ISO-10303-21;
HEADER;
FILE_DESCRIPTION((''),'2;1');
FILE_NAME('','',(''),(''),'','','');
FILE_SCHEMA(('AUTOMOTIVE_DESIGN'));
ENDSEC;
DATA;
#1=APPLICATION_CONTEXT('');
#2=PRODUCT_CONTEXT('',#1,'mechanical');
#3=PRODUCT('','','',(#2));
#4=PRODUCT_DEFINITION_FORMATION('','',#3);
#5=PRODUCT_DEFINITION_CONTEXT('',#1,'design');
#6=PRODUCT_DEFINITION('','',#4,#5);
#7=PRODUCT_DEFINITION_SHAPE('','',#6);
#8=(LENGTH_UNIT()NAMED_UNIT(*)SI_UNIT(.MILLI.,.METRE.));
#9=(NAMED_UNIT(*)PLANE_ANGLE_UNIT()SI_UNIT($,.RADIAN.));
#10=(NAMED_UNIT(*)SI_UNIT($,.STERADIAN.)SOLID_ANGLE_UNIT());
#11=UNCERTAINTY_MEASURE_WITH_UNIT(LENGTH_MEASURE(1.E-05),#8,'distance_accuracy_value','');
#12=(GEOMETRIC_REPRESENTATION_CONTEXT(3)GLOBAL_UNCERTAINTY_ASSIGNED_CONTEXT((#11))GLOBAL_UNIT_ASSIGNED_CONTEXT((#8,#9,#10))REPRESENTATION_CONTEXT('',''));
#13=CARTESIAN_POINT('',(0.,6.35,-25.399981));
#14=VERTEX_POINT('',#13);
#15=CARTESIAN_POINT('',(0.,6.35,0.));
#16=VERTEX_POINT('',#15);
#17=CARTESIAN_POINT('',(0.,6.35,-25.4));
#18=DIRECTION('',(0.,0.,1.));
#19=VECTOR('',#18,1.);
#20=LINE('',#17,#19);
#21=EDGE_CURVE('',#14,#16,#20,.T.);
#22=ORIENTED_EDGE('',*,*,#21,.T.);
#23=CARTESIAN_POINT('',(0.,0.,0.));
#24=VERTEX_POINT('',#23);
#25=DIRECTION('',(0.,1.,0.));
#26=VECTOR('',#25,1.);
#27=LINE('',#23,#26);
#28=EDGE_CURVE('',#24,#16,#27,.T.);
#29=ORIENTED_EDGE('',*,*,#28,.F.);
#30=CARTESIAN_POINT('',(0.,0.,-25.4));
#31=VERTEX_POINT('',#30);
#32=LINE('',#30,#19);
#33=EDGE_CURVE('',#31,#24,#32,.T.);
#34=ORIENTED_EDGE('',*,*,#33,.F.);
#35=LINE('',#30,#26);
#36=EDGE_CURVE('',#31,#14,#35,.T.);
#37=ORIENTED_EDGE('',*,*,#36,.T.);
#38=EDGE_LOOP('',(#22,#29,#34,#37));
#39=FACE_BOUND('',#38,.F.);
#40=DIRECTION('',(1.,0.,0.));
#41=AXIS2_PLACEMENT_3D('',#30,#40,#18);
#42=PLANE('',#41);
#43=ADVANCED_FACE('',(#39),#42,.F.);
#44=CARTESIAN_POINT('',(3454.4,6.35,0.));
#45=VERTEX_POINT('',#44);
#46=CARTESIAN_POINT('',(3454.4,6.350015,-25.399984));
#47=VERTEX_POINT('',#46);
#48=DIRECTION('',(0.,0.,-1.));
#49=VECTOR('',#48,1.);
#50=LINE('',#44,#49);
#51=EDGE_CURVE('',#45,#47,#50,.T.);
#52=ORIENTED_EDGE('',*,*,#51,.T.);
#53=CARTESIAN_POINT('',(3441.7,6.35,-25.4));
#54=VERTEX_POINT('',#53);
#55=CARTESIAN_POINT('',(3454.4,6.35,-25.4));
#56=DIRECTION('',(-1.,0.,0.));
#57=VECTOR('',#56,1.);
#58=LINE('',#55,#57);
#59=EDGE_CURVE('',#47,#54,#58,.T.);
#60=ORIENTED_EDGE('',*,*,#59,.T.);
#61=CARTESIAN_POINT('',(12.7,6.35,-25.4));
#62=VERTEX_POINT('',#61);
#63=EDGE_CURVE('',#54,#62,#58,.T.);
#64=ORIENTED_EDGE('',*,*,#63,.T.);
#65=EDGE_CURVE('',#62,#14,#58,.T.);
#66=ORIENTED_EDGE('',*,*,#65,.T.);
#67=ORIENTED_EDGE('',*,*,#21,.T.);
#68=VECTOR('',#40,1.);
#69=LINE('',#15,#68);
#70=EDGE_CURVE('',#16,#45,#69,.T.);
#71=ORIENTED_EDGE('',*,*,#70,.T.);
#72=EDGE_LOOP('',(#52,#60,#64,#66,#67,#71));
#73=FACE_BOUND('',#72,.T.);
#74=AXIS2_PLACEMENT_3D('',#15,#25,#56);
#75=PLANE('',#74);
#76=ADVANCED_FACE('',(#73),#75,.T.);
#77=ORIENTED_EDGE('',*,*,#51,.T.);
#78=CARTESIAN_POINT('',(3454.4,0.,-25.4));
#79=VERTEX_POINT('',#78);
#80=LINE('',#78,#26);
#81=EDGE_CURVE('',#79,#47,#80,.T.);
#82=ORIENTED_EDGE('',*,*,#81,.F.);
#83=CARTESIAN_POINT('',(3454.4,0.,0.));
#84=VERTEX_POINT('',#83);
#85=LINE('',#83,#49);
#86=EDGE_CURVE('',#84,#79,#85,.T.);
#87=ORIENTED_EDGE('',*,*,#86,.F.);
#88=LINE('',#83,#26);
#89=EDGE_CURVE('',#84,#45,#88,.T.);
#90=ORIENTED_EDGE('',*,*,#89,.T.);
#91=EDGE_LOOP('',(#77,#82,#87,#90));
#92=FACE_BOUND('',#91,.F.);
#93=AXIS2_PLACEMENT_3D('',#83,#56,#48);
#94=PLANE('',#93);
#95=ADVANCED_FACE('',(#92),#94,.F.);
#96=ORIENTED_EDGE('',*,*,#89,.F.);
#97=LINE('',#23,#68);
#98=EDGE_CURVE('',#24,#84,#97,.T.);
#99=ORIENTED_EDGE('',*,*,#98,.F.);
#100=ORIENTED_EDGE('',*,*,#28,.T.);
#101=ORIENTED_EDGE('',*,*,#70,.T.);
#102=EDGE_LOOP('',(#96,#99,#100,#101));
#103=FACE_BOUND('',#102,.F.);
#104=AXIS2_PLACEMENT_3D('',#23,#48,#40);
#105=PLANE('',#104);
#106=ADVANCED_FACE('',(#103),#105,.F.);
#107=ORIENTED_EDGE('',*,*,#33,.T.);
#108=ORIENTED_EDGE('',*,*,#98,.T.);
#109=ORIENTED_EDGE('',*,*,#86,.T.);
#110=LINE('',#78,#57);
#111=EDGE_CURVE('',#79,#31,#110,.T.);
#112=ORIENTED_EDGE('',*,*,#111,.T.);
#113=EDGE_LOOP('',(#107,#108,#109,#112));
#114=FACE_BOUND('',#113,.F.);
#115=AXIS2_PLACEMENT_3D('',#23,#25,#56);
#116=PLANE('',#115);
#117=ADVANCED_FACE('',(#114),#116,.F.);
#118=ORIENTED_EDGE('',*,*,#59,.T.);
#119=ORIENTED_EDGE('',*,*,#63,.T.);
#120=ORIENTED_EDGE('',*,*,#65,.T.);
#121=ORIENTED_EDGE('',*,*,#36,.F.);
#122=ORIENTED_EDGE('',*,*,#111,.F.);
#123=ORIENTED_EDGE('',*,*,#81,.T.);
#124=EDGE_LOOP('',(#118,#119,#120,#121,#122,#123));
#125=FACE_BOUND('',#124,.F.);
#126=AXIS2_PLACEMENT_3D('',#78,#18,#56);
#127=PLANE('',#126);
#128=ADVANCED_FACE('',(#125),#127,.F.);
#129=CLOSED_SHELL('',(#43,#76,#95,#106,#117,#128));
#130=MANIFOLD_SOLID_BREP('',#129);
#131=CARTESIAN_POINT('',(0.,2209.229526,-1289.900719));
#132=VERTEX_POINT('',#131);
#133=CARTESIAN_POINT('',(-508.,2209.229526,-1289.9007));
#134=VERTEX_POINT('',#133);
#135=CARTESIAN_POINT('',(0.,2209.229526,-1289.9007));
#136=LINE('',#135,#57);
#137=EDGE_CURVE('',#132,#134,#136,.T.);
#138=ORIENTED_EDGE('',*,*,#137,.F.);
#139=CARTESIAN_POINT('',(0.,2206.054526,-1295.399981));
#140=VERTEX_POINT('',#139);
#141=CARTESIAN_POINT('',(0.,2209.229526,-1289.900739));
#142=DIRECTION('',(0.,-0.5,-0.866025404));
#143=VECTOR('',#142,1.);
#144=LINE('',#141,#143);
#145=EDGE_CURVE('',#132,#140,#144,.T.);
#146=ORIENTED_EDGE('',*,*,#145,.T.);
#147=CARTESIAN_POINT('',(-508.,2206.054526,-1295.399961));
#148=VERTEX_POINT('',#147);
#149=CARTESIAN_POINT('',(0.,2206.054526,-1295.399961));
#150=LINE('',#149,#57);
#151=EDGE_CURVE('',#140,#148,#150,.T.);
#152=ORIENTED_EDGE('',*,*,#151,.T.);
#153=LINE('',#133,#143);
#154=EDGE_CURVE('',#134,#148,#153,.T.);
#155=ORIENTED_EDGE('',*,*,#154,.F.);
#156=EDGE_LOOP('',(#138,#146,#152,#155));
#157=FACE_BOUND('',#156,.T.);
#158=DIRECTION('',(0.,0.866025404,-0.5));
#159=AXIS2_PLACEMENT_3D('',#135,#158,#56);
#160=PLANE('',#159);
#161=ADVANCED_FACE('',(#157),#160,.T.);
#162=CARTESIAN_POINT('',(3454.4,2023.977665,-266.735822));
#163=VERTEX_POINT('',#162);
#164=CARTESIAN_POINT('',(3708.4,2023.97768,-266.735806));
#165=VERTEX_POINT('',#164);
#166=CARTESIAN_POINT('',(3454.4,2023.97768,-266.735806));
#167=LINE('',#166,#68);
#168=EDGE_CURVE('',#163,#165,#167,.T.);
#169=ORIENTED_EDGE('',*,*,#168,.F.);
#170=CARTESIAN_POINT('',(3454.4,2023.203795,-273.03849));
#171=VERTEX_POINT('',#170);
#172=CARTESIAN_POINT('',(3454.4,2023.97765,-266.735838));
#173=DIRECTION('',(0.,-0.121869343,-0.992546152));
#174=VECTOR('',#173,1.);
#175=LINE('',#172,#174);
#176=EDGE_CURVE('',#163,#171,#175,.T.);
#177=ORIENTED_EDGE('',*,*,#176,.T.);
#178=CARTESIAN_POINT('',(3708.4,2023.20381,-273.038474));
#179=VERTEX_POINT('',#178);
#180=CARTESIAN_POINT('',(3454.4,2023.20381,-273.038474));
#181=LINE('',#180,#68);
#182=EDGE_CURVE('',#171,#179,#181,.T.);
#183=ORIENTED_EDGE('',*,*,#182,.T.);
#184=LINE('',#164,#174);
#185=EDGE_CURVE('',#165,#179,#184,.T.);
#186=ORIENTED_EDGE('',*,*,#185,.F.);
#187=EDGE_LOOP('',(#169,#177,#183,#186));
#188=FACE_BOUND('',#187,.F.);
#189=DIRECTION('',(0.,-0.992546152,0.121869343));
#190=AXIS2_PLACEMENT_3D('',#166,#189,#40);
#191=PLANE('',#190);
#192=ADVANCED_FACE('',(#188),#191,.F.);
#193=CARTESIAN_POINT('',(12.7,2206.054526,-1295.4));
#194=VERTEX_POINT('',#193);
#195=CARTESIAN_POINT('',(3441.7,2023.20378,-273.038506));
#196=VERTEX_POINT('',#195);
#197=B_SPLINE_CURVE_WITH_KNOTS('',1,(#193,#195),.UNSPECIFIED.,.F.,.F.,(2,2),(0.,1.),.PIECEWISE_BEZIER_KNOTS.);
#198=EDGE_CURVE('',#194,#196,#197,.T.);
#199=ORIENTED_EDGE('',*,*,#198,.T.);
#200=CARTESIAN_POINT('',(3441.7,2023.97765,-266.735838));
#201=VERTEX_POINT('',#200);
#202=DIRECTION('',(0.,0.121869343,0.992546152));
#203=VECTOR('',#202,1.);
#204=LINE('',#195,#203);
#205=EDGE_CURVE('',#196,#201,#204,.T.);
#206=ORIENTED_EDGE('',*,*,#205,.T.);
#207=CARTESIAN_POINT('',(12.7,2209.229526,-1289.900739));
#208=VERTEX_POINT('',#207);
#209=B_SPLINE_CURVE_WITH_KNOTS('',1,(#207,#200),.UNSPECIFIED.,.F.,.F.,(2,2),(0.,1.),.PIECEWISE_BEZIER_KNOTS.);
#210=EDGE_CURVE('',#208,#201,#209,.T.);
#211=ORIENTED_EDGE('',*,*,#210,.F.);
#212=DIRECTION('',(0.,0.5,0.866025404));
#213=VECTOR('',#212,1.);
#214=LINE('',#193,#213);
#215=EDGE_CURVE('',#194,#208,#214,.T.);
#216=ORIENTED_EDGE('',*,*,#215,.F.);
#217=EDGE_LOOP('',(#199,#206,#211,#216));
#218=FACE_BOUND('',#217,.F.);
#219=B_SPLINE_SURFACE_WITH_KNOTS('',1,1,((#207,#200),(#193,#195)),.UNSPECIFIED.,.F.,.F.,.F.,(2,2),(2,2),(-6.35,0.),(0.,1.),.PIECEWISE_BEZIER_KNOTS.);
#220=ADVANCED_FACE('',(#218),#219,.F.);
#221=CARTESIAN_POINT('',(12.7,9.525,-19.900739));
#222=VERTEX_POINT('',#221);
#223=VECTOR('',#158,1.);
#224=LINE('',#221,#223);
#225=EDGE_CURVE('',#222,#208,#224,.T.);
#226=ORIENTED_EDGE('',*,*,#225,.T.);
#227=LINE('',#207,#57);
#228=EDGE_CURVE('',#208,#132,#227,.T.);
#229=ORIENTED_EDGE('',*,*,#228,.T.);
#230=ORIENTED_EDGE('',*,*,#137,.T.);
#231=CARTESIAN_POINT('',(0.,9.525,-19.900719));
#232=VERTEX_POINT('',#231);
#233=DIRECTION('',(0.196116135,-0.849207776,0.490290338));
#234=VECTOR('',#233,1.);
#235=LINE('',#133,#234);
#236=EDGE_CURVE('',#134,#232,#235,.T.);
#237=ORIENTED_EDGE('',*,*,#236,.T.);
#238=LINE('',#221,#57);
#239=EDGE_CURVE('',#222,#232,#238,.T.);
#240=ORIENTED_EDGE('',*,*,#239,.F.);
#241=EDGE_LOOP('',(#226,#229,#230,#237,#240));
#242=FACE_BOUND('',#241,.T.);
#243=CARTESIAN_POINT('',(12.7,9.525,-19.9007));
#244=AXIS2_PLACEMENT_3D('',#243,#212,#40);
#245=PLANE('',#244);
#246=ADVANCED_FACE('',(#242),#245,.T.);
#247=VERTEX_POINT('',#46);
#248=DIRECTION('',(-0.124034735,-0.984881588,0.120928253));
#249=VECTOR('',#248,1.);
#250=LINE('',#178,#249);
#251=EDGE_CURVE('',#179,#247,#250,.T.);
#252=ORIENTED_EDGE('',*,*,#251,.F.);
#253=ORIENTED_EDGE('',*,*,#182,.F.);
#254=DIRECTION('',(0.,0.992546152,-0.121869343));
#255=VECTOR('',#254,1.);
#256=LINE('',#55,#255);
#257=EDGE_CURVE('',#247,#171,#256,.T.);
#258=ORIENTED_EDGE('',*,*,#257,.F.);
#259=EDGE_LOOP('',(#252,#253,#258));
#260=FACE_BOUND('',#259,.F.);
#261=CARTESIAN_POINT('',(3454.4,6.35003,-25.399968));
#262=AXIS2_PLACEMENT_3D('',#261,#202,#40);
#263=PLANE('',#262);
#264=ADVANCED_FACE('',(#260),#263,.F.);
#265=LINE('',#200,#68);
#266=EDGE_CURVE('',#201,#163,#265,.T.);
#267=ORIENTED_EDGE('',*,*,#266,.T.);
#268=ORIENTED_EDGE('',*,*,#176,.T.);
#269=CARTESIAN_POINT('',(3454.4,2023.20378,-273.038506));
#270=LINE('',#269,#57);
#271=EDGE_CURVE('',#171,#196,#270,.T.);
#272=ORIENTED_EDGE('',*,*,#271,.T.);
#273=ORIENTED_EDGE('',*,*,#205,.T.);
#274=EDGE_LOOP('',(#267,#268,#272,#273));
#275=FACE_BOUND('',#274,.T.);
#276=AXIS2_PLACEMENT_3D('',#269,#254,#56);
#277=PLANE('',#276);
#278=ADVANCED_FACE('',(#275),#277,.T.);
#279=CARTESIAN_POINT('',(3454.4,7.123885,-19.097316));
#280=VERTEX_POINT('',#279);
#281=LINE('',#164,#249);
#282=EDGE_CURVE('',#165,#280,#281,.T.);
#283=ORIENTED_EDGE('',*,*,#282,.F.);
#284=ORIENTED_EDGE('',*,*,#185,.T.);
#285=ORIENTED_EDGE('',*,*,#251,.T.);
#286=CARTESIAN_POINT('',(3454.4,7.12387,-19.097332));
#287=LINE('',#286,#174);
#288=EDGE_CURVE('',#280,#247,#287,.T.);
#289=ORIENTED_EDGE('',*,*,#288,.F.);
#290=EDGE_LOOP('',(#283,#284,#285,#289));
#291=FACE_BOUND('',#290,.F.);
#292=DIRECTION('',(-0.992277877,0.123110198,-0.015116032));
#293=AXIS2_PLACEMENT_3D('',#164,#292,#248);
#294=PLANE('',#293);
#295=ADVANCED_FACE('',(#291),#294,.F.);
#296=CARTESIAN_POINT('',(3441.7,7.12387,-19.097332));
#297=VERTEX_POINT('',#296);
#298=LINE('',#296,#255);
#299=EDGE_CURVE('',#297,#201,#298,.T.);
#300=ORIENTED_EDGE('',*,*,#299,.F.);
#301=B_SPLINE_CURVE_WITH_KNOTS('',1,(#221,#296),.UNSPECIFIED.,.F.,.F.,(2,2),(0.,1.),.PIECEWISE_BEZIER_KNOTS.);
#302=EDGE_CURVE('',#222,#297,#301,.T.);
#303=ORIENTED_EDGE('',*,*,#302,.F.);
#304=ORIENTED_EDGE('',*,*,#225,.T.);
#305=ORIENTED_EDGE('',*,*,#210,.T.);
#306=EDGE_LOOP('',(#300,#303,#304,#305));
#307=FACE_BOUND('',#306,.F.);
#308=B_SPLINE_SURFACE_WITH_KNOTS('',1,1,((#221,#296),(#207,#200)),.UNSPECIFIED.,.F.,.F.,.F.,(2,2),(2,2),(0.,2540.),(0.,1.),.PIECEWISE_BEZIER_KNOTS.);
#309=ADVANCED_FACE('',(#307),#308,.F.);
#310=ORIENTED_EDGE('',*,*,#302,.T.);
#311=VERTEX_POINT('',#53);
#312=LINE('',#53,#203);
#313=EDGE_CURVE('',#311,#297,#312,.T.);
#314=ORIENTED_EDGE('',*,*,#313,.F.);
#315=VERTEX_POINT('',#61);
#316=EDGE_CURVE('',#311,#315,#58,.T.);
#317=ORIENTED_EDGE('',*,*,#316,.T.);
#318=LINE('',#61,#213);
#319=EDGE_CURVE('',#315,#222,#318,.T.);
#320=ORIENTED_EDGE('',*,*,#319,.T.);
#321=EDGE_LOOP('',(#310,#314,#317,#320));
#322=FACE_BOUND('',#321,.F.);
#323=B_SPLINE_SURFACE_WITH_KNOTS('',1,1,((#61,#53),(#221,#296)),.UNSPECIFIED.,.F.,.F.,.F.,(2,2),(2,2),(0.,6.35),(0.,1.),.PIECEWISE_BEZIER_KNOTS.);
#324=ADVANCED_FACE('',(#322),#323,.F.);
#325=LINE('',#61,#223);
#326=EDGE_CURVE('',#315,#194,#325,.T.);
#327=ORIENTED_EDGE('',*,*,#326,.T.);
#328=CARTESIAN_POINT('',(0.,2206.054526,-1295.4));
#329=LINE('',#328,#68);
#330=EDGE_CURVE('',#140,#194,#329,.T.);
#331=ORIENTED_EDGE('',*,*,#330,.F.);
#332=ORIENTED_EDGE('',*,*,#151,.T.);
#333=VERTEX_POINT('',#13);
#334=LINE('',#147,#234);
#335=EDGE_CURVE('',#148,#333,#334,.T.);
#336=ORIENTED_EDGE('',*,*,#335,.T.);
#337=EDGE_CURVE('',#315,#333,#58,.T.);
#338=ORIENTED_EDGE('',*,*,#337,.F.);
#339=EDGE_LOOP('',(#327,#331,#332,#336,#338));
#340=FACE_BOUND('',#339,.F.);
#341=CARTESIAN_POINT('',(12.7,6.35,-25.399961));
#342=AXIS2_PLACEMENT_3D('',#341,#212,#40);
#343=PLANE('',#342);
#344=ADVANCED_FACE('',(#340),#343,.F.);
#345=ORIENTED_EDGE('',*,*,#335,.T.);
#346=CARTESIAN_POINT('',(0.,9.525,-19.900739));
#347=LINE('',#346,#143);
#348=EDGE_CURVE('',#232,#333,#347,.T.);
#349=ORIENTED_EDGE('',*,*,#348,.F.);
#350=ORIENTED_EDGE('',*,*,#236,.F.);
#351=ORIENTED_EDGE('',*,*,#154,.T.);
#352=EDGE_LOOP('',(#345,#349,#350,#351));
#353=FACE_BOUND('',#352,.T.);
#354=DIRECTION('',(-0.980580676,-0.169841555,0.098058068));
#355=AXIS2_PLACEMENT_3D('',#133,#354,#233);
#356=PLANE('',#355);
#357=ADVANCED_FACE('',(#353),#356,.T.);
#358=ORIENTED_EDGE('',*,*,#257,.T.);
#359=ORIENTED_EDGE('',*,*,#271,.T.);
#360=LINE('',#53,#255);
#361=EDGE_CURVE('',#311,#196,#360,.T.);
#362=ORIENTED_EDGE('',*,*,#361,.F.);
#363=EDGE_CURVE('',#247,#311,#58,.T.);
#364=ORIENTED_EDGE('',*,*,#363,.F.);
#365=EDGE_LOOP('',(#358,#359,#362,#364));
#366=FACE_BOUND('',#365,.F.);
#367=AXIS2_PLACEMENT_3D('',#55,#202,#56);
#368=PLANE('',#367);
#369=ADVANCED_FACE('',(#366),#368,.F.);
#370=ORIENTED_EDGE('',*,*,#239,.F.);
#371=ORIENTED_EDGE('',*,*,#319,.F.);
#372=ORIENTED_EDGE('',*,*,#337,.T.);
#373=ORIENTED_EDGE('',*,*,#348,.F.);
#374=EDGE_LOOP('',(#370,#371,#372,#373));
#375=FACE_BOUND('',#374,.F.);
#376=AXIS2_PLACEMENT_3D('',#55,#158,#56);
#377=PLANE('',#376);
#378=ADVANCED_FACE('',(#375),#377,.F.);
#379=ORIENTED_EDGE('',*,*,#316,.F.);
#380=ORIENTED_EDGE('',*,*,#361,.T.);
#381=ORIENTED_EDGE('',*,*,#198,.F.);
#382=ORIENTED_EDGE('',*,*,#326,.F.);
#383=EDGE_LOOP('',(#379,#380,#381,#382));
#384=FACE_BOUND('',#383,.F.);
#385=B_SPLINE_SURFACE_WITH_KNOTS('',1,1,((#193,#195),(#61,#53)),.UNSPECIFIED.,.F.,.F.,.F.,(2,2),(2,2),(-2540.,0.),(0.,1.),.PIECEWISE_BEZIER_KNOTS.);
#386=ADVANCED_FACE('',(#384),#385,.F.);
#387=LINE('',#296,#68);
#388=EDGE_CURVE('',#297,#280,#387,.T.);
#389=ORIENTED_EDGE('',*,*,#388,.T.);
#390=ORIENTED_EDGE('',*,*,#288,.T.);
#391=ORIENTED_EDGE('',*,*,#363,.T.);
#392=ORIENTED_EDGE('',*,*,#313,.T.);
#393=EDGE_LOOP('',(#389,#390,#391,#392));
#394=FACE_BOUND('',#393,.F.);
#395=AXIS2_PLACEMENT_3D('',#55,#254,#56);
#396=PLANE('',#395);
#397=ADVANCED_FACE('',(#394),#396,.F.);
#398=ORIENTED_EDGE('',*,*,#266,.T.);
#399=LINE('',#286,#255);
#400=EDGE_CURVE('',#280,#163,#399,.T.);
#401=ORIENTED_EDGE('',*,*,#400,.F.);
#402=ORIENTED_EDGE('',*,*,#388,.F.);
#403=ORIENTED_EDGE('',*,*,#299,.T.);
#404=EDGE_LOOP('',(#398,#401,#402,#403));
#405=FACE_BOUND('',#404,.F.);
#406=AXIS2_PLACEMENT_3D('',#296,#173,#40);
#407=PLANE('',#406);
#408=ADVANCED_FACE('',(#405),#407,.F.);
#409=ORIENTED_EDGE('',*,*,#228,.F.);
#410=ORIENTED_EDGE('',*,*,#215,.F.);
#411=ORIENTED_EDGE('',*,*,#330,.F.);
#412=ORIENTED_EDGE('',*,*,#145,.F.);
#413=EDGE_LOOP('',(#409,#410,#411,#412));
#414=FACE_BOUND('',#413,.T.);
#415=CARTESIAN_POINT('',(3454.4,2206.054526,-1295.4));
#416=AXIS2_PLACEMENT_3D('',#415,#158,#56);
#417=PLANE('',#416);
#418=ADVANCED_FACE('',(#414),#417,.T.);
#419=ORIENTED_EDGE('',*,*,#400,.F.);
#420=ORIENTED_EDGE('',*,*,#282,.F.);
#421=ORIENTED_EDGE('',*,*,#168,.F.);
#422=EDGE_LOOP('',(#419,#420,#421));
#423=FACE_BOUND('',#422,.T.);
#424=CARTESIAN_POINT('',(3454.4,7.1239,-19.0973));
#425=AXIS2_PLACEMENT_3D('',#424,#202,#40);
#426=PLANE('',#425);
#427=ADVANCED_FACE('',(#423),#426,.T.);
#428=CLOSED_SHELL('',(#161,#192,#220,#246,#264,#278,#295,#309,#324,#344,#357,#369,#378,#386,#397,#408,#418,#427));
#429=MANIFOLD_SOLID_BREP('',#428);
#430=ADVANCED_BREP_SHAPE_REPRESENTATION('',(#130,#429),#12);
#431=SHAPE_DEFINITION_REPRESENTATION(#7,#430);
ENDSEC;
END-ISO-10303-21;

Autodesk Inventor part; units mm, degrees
ref_plane "YZ Plane" through (0, 0, 0) normal (1, 0, 0) x (0, 1, 0)
sketch "Sketch1" plane through (0, 0, 0) normal (0, 1, 0) x (-1, 0, 0)
  line L0 (0, 0) -> (-3454.4, 0)
  line L1 (-3454.4, 0) -> (-3454.4, -25.4)
  line L2 (-3454.4, -25.4) -> (0, -25.4)
  line L3 (0, -25.4) -> (0, 0)
  dimension "d0" = 3454.4
  dimension "d1" = 25.4
extrude "base" add sketch "Sketch1" along normal blind 6.35
ref_plane "right" through (3454.4, 6.35, -25.4) normal (0, 0.9925462, -0.1218693) x (-1, 0, 0)
sketch "Sketch7" plane through (3454.4, 6.35, -25.4) normal (0, 0.9925462, -0.1218693) x (-1, 0, 0)
  line L0 (0, 0) -> (12.7, 0)
  line L1 (12.7, 0) -> (12.7, 6.35)
  line L2 (12.7, 6.35) -> (0, 6.35)
  line L3 (0, 6.35) -> (0, 0)
  point P0 (3454.4, 24.4368)
extrude "upRight" add sketch "Sketch7" along normal blind 2032
sketch "Sketch8" plane through (3454.4, 7.1239, -19.0973) normal (0, 0.1218693, 0.9925462) x (1, 0, 0)
  line L0 (0, 0) -> (0, 2032) projected
  line L1 (-12.7, 0) -> (-12.7, 2032) projected
  line L2 (0, 2032) -> (254, 2032)
  line L3 (254, 2032) -> (0, 0)
  point P0 (-3454.4, -9.3981)
  dimension "d36" = 254
extrude "outRight" add sketch "Sketch8" against normal blind 6.35
ref_plane "left" through (3454.4, 6.35, -25.4) normal (0, 0.8660254, -0.5) x (-1, 0, 0)
sketch "Sketch9" plane through (3454.4, 6.35, -25.4) normal (0, 0.8660254, -0.5) x (-1, 0, 0)
  line L0 (3454.4, 0) -> (3441.7, 0)
  line L1 (3441.7, 0) -> (3441.7, 6.35)
  line L2 (3441.7, 6.35) -> (3454.4, 6.35)
  line L3 (3454.4, 6.35) -> (3454.4, 0)
  point P0 (3454.4, 18.822)
  dimension "d40" = 12.7
  dimension "d41" = 6.35
extrude "upLeft" add sketch "Sketch9" along normal blind 2540
sketch "Sketch10" plane through (12.7, 9.525, -19.9007) normal (0, 0.5, 0.8660254) x (1, 0, 0)
  line L0 (-12.7, 0) -> (-12.7, 2540) projected
  line L1 (-12.7, 2540) -> (-520.7, 2540)
  line L2 (-520.7, 2540) -> (-12.7, 0)
  point P0 (-12.7, -18.1993)
  dimension "d44" = 508
extrude "outLeft" add sketch "Sketch10" against normal blind 6.35
loft "Loft3" add section 1 edges at (12.7, 7.9375, -22.6504) (12.7, 1106.2023, -660.4) (12.7, 2207.642, -1292.6504) (12.7, 1109.3773, -654.9007) section 2 edges at (3441.7, 6.7369, -22.2487) (3441.7, 1015.5508, -142.9166) (3441.7, 2023.5907, -269.8872) (3441.7, 1014.7769, -149.2193)
properties part number "2r4scr" material "Glass"
